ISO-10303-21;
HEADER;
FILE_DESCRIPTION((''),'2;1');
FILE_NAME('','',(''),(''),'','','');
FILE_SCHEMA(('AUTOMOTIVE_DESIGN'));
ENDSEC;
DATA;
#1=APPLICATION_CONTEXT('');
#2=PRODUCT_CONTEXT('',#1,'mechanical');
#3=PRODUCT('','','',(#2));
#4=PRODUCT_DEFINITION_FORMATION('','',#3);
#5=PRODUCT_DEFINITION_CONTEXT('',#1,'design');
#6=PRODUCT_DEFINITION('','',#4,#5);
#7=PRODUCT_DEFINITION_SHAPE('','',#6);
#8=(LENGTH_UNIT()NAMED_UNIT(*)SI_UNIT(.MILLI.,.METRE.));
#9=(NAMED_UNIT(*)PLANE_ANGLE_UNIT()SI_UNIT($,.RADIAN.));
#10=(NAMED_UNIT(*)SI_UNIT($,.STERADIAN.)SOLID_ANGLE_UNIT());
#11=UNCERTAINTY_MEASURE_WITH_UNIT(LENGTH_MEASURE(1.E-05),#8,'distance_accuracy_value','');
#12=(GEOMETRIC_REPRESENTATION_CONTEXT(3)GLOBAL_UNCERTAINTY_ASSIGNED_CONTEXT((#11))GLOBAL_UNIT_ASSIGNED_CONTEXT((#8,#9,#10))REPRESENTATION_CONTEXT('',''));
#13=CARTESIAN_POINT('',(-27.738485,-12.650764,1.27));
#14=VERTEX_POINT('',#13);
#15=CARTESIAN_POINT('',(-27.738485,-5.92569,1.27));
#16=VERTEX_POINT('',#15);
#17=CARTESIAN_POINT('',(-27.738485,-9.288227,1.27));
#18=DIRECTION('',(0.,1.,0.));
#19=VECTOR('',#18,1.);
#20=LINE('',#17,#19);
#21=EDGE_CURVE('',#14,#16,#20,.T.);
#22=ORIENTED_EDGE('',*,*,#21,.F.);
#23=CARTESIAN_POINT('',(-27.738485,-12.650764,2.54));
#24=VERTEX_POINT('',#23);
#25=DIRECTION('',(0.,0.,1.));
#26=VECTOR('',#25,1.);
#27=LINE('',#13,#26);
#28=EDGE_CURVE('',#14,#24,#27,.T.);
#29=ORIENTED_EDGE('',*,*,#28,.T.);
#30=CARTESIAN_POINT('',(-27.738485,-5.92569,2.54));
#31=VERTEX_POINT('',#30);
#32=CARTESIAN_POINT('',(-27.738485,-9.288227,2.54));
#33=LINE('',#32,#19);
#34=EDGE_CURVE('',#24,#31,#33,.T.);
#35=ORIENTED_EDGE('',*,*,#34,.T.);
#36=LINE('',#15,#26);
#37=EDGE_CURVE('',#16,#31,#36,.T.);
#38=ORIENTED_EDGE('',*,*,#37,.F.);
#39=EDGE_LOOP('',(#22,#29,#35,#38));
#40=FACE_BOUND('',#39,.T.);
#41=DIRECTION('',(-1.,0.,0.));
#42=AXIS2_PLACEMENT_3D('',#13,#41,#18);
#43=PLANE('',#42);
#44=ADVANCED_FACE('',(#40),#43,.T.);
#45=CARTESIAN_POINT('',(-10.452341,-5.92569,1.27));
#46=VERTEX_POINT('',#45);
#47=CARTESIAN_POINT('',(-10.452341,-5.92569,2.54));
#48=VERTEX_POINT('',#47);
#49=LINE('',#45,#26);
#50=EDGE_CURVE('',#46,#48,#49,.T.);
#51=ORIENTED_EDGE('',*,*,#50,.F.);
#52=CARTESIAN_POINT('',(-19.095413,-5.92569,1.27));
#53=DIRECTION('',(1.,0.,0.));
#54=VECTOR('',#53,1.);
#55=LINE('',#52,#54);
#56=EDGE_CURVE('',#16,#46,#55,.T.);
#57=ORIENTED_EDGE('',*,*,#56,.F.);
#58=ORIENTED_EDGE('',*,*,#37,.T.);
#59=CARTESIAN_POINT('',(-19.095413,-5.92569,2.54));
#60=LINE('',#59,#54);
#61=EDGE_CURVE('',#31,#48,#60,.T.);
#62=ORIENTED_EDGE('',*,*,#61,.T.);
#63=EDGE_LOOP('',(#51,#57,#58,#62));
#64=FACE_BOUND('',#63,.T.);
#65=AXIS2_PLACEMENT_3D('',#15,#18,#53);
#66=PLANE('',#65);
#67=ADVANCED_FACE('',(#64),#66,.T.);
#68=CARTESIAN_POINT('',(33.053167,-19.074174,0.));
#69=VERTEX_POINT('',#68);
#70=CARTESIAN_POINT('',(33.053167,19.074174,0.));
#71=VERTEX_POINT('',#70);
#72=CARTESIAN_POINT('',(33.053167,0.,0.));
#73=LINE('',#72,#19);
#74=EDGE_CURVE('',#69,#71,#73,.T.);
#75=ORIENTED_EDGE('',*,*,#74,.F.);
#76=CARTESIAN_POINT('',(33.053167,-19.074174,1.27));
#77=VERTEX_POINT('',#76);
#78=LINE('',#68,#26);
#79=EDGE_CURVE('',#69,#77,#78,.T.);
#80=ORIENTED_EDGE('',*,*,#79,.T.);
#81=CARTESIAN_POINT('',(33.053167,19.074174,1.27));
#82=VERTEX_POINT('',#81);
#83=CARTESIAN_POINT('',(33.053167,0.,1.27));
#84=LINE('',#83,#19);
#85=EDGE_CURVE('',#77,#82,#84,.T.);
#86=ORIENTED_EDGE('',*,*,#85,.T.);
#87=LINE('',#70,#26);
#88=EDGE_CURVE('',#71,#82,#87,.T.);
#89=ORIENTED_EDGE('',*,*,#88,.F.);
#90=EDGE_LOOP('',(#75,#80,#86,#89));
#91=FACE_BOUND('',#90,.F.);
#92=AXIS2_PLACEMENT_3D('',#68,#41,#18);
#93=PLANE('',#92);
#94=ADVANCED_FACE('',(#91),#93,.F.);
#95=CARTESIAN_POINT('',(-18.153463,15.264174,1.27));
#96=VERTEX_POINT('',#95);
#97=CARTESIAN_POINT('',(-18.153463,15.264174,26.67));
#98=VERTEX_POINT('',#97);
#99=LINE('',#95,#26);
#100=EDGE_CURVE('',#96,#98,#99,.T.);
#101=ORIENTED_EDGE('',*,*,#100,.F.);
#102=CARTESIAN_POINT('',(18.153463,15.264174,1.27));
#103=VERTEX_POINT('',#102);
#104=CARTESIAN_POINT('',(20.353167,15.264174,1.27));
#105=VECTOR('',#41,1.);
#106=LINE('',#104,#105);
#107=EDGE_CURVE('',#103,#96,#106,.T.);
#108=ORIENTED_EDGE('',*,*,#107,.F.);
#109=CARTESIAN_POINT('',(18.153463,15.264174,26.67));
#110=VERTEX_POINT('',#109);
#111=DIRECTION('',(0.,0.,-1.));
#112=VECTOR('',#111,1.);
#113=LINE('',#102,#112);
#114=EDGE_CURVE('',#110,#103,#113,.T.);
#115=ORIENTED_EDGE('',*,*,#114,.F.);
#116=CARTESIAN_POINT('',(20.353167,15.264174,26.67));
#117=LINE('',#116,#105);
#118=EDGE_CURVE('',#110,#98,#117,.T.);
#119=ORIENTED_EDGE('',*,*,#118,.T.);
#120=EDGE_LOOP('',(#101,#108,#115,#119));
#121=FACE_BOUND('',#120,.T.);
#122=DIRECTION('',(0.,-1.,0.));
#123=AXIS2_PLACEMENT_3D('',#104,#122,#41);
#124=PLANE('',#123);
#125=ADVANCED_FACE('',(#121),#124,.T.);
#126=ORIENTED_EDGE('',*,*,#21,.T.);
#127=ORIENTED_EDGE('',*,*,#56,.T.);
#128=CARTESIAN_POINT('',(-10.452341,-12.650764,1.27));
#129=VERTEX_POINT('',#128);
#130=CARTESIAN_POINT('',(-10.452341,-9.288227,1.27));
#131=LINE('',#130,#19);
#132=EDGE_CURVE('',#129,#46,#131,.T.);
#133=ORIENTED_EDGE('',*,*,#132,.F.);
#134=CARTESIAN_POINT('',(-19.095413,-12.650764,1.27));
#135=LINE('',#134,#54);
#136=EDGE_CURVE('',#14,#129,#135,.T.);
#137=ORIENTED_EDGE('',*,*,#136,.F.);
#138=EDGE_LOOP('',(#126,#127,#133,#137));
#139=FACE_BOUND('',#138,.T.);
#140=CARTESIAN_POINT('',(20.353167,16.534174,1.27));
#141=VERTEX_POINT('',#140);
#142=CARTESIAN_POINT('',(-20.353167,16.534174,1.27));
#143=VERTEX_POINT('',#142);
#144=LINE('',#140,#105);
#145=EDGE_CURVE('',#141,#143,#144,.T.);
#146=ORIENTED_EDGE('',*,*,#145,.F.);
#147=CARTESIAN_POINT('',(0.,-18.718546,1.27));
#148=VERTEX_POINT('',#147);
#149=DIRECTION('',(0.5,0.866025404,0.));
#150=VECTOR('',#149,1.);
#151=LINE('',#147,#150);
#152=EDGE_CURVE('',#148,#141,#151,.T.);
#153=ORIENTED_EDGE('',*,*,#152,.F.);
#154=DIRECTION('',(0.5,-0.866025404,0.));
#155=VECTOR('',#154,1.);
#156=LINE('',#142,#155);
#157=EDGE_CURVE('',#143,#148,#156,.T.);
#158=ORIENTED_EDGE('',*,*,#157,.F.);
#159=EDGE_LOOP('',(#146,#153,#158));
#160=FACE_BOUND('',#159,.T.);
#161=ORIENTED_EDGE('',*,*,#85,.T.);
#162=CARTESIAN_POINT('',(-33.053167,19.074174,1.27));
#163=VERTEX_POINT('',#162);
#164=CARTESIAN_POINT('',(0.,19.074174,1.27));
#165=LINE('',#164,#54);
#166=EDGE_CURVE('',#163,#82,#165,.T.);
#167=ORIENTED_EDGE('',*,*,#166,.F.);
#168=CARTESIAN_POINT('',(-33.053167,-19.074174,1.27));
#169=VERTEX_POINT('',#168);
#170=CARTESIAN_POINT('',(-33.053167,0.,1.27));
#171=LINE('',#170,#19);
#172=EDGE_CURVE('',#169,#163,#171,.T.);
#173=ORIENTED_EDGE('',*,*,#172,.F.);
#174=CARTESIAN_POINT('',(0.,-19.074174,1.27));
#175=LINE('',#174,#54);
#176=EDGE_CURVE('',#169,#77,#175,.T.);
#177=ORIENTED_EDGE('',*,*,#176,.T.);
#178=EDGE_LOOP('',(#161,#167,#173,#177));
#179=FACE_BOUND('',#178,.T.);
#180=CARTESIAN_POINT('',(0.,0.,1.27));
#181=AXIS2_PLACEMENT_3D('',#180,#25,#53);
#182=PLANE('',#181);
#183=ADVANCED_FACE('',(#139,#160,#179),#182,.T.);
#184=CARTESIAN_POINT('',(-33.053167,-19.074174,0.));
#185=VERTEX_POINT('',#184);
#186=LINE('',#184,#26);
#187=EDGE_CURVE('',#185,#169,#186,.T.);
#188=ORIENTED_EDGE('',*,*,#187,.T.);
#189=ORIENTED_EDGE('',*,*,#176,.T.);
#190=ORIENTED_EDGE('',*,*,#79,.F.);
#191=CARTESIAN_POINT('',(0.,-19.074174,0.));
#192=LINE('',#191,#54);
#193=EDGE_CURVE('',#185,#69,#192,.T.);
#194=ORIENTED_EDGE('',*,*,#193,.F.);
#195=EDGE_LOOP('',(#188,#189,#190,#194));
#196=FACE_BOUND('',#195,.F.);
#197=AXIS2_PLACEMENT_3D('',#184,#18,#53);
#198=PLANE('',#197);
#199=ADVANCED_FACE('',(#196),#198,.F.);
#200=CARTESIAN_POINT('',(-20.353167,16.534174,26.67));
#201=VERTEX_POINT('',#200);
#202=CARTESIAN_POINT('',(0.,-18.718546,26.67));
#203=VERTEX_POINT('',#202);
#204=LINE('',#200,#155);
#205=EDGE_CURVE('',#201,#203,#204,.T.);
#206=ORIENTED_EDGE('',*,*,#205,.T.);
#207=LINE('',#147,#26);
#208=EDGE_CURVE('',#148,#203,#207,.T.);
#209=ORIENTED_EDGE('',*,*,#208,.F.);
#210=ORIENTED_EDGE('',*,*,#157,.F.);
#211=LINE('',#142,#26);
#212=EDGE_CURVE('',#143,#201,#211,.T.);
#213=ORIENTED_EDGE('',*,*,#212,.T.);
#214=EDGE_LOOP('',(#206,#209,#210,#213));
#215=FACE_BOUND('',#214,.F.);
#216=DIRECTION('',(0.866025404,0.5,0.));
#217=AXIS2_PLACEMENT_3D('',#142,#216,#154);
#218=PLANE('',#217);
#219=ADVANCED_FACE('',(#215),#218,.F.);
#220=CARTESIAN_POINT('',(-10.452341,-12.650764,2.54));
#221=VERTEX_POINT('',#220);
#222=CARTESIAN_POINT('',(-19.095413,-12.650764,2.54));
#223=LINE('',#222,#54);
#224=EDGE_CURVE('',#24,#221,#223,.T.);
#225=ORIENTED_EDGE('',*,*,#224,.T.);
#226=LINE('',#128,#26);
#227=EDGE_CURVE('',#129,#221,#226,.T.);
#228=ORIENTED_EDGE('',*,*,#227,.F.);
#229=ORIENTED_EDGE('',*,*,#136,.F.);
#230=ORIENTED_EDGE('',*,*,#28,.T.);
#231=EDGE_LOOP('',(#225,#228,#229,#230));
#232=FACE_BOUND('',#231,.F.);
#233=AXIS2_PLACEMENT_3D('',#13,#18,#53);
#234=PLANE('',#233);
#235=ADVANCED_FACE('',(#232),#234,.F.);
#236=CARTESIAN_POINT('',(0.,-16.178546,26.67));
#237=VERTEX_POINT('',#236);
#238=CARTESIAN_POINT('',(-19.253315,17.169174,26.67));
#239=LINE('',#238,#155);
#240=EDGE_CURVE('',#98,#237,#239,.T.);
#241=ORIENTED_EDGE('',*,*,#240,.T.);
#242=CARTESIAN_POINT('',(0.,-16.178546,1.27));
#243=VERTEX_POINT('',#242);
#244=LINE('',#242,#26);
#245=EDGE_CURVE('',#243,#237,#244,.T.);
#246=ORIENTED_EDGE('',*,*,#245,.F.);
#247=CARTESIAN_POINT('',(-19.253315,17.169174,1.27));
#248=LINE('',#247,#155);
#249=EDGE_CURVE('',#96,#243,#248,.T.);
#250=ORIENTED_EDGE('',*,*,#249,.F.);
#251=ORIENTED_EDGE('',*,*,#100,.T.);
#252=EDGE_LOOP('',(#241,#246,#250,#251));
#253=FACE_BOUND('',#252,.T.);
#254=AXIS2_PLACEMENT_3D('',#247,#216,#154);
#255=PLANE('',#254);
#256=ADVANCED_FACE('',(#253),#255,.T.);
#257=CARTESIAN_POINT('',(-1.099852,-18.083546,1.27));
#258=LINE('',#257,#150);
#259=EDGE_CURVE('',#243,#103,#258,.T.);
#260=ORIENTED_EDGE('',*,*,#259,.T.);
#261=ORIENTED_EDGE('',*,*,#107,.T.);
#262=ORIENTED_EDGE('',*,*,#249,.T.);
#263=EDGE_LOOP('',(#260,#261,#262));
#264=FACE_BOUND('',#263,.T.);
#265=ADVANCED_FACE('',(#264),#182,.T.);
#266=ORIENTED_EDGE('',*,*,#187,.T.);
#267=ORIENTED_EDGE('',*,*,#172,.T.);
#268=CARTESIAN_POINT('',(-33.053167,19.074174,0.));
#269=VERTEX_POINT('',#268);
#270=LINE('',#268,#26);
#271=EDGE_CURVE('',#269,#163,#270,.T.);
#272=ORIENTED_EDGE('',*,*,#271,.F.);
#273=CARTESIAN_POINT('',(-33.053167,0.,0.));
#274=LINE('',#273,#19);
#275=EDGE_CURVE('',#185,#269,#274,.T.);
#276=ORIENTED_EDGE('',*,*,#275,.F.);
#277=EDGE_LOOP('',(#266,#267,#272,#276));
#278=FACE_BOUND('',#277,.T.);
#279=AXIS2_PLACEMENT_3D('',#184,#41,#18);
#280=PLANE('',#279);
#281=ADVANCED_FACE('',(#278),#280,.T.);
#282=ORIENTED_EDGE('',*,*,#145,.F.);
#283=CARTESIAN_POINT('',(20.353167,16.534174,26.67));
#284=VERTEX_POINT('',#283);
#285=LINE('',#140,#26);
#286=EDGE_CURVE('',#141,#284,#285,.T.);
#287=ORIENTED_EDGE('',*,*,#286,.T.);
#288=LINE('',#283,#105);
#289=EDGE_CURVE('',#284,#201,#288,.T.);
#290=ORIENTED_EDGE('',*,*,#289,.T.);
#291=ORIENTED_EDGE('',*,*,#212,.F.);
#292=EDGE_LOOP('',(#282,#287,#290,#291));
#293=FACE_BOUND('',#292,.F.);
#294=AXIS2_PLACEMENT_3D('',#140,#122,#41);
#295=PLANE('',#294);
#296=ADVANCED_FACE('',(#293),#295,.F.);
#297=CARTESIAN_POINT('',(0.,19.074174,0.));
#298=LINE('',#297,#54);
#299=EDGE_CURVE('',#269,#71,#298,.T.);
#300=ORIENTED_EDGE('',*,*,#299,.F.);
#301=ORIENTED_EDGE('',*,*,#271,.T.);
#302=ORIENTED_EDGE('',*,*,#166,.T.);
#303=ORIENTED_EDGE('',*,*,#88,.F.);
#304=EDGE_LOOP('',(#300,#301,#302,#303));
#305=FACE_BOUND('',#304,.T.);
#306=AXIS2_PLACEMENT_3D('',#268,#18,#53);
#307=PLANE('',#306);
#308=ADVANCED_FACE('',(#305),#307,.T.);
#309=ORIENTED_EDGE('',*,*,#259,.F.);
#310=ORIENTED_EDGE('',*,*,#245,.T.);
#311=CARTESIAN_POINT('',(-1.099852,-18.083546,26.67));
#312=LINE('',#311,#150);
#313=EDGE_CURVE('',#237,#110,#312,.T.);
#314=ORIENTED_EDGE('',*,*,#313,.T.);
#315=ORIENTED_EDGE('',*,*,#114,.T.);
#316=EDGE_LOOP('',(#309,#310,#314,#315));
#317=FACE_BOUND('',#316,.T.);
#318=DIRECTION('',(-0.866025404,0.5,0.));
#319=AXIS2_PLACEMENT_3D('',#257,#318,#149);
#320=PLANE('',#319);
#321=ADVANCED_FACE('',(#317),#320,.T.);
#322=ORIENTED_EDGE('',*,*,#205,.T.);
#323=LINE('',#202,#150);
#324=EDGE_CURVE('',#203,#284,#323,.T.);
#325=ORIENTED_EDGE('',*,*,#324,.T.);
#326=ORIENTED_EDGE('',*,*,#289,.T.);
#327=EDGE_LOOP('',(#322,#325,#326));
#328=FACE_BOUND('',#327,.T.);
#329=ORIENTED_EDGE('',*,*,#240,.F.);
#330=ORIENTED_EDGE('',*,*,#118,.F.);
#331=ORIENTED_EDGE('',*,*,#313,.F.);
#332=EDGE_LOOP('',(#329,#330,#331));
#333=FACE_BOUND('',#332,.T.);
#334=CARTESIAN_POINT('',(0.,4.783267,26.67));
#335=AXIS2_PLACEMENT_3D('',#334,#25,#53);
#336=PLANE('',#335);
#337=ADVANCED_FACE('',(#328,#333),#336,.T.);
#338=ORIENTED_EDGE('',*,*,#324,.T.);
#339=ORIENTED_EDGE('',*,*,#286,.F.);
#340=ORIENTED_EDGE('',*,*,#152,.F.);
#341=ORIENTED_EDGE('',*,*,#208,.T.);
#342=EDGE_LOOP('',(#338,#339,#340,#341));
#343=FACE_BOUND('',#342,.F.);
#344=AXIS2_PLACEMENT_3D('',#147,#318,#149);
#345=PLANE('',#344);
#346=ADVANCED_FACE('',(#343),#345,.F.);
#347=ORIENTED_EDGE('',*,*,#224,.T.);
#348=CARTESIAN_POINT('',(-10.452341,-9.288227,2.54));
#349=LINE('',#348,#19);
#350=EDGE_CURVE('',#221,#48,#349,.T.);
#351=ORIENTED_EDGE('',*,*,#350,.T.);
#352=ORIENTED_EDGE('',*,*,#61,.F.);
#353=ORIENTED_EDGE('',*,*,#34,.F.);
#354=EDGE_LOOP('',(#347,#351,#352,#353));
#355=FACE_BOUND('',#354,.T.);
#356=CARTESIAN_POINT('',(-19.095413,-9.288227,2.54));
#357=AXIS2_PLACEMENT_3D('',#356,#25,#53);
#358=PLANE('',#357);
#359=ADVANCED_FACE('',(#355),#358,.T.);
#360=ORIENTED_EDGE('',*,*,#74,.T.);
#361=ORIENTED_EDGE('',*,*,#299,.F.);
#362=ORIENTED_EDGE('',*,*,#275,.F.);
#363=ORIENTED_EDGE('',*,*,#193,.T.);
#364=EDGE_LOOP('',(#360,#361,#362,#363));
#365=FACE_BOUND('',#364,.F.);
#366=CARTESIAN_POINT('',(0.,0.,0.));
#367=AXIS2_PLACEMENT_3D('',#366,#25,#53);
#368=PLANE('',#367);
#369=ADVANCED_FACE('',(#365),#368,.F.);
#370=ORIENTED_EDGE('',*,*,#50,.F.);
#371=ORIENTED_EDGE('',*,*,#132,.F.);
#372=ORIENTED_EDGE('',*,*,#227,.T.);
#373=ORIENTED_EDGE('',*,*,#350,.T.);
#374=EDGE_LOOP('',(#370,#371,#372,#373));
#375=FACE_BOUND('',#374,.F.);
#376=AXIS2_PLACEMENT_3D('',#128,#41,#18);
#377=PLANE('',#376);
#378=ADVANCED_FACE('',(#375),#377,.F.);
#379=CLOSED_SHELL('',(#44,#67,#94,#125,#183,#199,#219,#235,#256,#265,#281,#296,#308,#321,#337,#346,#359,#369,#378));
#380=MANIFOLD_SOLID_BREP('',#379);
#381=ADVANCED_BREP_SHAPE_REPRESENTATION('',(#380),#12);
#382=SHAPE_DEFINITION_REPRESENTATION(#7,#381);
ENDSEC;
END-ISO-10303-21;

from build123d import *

# Parameters (mm, degrees)
F0_W        = 66.1063343287
F0_H        = 38.1483472884
F1_DEPTH    = 1.27
F3_DEPTH    = 25.4
F4_T        = 1.27
F4_T3_DEPTH = 43.2463343287
F4_T5_DEPTH = 43.2463343287
F4_T7_DEPTH = 43.2463343287
F5_W        = 17.286144197
F5_H        = 6.7250733264
F6_DEPTH    = 1.27


# Not quite as in the source:
# - a shell that OpenCascade refuses in one call is made with other operations: the cavity is built on its own and cut out


with BuildPart() as f1:
    # F0 (on Top) → F1 (new body)
    with BuildSketch(Plane.XY):
        Rectangle(F0_W, F0_H)
    extrude(amount=F1_DEPTH)

    # F2 (on face) → F3 (join)
    with BuildSketch(Plane.XY.offset(1.27)):
        Polygon((20.3531671643, 16.5341736442), (-20.3531671643, 16.5341736442), (0, -18.7185459794), align=None)
    extrude(amount=F3_DEPTH)

    # F4: shell of thickness 1.27, made by hand


with BuildPart() as f4_core1:
    # F4_t2: copy of F1
    add(f1.part)

    # the walls: a layer under each face that stays
    f4_faces = [f4_core1.faces().sort_by_distance(p)[0] for p in [
        (33.0531671643, 0, 0.635),
        (0, -19.0741736442, 0.635),
        (0, 19.0741736442, 0.635),
        (0, 0, 0),
        (-22.0354447762, -12.7161157628, 1.27),
        (-33.0531671643, 0, 0.635),
        (0, 16.5341736442, 13.97),
        (-10.1765835822, -1.0921861676, 13.97),
        (10.1765835822, -1.0921861676, 13.97),
    ]]
    thicken(f4_faces, amount=-F4_T, mode=Mode.SUBTRACT)

    # F4_s4 → F4_t3 (cut)
    with BuildSketch(Plane.YZ.offset(-21.6231671643)):
        Polygon((16.5468736442, 1.2827), (16.5341736442, 0), (15.2641736442, 0), (15.2641736442, 1.27), align=None)
    extrude(amount=F4_T3_DEPTH, mode=Mode.SUBTRACT)

    # F4_s6 → F4_t5 (cut)
    with BuildSketch(Plane(origin=(-12.8827989943, 22.3136624018, 0), x_dir=(0, 0, 1), z_dir=(0.5, -0.8660254038, 0))):
        Polygon((1.2827, 9.3719729897), (0, 9.3592729897), (0, 8.0892729897), (1.27, 8.0892729897), align=None)
    extrude(amount=F4_T5_DEPTH, mode=Mode.SUBTRACT)

    # F4_s8 → F4_t7 (cut)
    with BuildSketch(Plane(origin=(-8.74036817, -15.1387617473, 0), x_dir=(0, 0, 1), z_dir=(0.5, 0.8660254038, 0))):
        Polygon((1.2827, 9.3719729897), (0, 9.3592729897), (0, 8.0892729897), (1.27, 8.0892729897), align=None)
    extrude(amount=F4_T7_DEPTH, mode=Mode.SUBTRACT)


with BuildPart() as f1_1:
    add(f1.part)

    # what is left inside the walls is the cavity
    f4_cavity = [f4_core1.part.solids().sort_by_distance(p)[0] for p in [
        (-9.065733, -0.450836, 18.203333),
    ]]
    add(f4_cavity, mode=Mode.SUBTRACT)

    # F5 (on face) → F6 (join)
    with BuildSketch(Plane.XY.offset(1.27)):
        with Locations((-19.0954133868, -9.2882269528)):
            Rectangle(F5_W, F5_H)
    extrude(amount=F6_DEPTH)


solid = f1_1.part
